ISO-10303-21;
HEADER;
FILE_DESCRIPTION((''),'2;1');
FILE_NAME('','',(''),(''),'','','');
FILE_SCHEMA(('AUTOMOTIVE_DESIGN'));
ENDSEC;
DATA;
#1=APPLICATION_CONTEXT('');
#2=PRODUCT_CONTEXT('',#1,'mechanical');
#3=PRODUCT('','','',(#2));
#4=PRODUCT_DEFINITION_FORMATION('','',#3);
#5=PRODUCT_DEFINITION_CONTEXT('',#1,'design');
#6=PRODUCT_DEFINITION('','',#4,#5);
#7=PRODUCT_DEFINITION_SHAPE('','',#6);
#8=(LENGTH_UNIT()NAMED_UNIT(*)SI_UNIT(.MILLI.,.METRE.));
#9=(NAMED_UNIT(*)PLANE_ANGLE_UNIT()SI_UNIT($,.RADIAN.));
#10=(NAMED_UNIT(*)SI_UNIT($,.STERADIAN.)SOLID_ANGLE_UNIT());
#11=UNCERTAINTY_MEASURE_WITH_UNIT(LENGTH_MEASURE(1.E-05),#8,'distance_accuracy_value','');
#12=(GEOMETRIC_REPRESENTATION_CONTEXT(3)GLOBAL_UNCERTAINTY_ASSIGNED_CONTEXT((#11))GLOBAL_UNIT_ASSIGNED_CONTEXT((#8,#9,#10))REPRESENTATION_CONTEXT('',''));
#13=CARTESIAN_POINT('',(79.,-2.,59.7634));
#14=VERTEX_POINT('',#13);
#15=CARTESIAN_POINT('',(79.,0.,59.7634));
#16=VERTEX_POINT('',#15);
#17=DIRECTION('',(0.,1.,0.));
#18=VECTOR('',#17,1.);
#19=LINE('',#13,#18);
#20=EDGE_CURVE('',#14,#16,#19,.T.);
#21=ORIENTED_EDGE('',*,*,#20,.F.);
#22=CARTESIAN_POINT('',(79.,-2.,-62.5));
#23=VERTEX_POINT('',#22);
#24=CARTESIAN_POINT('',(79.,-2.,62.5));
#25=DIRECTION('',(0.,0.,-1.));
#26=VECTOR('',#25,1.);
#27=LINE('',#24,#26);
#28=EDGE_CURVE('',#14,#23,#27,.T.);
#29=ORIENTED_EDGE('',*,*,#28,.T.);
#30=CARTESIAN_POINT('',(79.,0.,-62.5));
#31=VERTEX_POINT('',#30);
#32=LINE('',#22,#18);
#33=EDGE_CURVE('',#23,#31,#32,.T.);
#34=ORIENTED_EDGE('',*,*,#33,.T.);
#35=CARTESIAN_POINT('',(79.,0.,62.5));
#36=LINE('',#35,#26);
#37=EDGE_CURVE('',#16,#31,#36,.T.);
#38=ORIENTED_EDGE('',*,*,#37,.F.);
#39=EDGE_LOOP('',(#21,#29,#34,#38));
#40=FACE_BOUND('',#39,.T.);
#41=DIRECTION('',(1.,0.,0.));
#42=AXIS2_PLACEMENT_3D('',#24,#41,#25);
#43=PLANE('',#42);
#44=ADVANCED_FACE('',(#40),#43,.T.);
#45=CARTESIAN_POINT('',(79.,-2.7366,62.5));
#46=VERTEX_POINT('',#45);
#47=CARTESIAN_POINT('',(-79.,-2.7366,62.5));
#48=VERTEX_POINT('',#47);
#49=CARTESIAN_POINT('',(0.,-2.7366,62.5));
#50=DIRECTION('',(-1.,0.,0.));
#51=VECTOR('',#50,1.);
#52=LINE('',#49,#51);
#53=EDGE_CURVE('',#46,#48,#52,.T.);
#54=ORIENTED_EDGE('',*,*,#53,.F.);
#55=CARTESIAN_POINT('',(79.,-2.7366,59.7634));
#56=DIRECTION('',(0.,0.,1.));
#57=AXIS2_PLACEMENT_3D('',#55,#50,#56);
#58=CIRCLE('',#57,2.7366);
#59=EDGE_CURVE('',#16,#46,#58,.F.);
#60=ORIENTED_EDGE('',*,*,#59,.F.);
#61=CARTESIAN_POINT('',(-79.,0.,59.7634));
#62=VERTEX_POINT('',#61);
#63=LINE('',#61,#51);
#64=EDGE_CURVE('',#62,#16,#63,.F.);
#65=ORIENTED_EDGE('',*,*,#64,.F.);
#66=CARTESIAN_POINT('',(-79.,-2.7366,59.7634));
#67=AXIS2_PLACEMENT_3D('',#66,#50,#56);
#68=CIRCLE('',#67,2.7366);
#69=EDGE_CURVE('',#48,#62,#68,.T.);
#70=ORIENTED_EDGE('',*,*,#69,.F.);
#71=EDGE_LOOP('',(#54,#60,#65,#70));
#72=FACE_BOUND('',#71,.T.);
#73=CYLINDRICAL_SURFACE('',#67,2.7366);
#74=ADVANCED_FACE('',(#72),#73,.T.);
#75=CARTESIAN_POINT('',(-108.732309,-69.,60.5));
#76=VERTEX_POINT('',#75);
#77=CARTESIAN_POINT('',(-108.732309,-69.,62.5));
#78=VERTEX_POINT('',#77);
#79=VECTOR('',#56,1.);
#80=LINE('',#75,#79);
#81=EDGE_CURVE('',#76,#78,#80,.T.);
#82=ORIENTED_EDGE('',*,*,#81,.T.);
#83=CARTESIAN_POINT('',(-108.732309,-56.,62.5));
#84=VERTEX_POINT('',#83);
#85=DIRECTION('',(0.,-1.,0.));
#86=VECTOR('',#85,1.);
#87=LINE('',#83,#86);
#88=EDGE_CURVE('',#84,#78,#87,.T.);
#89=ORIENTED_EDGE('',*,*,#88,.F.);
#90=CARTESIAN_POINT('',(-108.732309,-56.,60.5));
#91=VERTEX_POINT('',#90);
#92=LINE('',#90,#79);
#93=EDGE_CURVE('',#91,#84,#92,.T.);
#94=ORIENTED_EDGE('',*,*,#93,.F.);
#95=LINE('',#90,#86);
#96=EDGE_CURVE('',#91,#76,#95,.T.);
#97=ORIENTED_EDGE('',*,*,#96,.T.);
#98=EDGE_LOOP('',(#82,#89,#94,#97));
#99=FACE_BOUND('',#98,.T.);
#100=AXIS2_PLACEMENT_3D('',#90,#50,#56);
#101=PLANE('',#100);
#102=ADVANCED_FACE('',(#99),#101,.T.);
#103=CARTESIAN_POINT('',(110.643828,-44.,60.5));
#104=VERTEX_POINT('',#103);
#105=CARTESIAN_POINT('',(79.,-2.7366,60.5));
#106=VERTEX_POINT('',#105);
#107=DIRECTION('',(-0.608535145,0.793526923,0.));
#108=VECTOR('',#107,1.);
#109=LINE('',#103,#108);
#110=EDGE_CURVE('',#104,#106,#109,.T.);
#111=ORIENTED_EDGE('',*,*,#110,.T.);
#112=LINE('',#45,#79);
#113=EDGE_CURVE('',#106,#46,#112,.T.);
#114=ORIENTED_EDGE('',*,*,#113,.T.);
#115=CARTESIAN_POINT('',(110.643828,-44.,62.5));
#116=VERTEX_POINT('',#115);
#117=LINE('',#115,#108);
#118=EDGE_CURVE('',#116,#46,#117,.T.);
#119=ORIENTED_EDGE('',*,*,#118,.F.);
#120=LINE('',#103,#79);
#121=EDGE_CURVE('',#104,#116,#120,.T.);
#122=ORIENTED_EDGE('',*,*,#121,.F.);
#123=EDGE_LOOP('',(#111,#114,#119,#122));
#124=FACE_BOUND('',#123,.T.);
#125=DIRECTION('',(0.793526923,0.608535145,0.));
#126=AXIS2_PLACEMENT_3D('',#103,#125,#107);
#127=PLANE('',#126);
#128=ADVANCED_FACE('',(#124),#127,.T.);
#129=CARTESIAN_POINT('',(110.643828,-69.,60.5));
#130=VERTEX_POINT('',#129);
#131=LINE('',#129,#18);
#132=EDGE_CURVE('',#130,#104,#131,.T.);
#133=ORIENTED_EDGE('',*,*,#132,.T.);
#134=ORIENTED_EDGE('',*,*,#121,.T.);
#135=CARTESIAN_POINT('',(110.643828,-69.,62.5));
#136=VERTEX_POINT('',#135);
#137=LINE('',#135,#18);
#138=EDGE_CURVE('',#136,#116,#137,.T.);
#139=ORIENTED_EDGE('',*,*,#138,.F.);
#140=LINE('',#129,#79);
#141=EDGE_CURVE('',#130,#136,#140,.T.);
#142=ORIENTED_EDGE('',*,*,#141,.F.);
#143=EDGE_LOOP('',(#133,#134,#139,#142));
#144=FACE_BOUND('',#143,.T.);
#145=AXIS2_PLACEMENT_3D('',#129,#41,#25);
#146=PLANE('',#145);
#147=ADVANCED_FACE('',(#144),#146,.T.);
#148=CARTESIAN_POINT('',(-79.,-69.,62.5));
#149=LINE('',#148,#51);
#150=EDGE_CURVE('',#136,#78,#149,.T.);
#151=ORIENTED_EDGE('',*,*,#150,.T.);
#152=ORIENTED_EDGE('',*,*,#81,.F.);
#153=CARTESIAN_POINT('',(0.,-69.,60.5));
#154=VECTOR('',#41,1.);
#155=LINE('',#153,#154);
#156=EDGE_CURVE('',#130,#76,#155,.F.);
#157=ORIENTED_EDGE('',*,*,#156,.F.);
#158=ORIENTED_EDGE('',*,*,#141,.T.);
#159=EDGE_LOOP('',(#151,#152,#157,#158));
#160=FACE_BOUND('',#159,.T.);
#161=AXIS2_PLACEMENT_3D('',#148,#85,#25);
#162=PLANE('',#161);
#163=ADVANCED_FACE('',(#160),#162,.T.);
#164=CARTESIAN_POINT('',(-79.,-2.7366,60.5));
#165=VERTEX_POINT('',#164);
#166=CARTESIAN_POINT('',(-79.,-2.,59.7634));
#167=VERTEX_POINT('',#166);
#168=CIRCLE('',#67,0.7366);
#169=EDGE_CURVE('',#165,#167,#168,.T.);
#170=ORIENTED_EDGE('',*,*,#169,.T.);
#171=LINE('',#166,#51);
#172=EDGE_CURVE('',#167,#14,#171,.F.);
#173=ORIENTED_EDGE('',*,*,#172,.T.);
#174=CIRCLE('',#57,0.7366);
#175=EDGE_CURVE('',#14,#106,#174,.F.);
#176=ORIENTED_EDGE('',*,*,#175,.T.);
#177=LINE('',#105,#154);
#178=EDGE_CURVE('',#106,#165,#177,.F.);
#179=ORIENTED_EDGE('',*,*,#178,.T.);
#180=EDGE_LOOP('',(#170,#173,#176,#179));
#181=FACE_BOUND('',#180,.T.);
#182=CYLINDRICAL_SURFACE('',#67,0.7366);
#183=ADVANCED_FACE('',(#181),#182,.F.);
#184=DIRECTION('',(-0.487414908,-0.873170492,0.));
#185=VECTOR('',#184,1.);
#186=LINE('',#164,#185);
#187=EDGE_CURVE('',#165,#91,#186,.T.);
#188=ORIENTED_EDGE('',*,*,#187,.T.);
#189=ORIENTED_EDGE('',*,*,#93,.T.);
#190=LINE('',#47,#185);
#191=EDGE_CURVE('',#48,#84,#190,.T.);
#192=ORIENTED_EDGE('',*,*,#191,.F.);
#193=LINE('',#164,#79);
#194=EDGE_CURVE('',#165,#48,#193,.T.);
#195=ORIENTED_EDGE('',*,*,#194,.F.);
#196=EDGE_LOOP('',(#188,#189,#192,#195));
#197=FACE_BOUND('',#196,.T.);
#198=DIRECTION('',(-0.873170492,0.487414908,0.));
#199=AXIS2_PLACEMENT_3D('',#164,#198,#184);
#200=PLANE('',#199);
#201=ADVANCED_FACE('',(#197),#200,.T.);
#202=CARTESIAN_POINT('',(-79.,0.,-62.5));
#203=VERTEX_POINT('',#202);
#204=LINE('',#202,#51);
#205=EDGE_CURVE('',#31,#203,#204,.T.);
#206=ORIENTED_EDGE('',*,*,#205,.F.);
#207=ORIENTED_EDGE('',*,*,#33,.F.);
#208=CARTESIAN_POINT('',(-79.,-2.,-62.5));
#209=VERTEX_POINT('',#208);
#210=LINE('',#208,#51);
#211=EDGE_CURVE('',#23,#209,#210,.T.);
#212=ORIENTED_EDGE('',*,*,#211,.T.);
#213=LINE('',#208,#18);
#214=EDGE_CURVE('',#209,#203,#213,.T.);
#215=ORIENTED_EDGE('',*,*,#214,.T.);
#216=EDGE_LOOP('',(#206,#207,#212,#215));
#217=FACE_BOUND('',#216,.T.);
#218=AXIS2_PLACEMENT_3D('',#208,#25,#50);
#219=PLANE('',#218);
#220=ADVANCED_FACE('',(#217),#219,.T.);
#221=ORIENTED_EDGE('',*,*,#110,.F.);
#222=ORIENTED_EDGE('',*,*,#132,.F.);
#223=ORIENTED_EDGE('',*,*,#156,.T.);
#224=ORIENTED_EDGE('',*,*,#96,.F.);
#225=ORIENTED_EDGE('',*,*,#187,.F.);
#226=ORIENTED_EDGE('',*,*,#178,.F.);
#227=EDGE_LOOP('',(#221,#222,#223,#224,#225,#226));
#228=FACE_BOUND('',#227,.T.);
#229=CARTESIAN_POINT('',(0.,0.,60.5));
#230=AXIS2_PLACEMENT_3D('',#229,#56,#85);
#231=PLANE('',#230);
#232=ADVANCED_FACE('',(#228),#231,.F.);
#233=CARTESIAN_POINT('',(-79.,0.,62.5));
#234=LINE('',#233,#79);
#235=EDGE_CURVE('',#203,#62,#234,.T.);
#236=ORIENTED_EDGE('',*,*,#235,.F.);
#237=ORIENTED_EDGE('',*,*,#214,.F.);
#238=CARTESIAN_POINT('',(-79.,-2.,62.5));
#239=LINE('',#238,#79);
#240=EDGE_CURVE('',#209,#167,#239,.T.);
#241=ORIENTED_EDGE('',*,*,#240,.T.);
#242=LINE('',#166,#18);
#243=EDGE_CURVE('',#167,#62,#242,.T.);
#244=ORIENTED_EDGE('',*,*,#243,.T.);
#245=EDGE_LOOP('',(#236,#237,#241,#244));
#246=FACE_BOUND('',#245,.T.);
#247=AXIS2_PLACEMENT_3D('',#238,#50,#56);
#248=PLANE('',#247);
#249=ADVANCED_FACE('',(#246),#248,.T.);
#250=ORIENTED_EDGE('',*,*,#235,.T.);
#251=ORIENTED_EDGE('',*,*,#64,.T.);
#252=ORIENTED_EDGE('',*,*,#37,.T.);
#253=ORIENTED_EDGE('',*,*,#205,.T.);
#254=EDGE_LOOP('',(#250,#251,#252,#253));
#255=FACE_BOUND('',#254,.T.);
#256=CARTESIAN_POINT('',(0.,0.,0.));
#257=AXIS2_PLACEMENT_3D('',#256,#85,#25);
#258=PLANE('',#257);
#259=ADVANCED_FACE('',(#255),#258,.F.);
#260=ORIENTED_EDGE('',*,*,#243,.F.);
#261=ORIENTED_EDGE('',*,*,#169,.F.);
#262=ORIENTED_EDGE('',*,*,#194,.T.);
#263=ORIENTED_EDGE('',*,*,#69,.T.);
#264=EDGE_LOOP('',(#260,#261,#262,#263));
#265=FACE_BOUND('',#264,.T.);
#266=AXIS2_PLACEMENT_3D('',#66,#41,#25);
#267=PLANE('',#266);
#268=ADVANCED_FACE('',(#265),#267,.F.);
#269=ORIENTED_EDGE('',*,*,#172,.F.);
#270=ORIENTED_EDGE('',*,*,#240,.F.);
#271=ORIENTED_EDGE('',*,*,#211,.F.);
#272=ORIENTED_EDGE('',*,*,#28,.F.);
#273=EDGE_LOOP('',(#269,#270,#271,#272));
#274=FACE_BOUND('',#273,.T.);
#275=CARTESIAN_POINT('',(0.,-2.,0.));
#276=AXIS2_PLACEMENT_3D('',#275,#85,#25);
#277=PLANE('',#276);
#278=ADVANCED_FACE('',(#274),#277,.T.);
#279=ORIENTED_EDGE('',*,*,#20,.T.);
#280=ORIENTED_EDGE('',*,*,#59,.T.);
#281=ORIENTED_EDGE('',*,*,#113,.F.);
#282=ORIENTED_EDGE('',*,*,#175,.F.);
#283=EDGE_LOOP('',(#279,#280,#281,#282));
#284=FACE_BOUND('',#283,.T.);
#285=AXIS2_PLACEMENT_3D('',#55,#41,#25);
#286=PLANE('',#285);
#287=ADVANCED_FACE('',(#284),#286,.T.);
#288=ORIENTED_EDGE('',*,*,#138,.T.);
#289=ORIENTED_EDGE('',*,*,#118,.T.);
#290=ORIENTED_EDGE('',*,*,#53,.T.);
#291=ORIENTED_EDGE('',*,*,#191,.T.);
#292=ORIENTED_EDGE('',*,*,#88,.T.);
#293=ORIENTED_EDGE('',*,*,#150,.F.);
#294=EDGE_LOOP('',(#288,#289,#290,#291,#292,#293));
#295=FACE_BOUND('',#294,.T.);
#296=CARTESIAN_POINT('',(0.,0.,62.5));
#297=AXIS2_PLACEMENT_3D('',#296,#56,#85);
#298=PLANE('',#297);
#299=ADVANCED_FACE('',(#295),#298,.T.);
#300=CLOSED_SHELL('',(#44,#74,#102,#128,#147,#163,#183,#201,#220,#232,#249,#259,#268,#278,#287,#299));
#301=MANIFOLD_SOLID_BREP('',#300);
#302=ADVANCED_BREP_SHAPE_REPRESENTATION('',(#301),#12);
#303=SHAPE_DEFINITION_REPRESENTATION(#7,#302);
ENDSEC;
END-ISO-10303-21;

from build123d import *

# Parameters (mm, degrees)
SKETCH_1_W                       = 158
SKETCH_1_H                       = 125
SM_BASE_FLANGE_1_DEPTH           = 2
SM_EDGE_FLANGE_1_STRIP_W         = 9.4732
SM_EDGE_FLANGE_1_STRIP_H         = 2
SM_EDGE_FLANGE_1_STRIP_CUT_DEPTH = 158
SM_EDGE_FLANGE_1_DEPTH           = 158
SM_BASE_FLANGE_1_2_DEPTH         = 2


# Sheet-metal steps are written as plain solids
with BuildPart() as part:
    # Sketch 1 → Sm Base Flange 1 (new body)
    with BuildSketch(Plane(origin=(0, 0, 0), x_dir=(1, 0, 0), z_dir=(0, 1, 0))):
        Rectangle(SKETCH_1_W, SKETCH_1_H)
    extrude(amount=-SM_BASE_FLANGE_1_DEPTH)

    # 边线-法兰1 strip (across the edge) → 边线-法兰1 strip cut (cut)
    with BuildSketch(Plane(origin=(79, -2, 62.5), x_dir=(0, 0, -1), z_dir=(-1, 0, 0))):
        with Locations((-2, -1)):
            Rectangle(SM_EDGE_FLANGE_1_STRIP_W, SM_EDGE_FLANGE_1_STRIP_H)
    extrude(amount=SM_EDGE_FLANGE_1_STRIP_CUT_DEPTH, mode=Mode.SUBTRACT)

    # 边线-法兰1 section (across the edge) → 边线-法兰1 (add)
    with BuildSketch(Plane(origin=(79, -2, 62.5), x_dir=(0, 0, -1), z_dir=(-1, 0, 0))):
        with BuildLine():
            Line((0, 0.7366), (0, 67))
            Line((0, 67), (2, 67))
            Line((2, 67), (2, 0.7366))
            ThreePointArc((2, 0.7366), (2.215745145, 0.215745145), (2.7366, 0))
            Line((2.7366, 0), (2.7366, -2))
            ThreePointArc((2.7366, -2), (0.801531583, -1.198468417), (0, 0.7366))
        make_face()
    extrude(amount=SM_EDGE_FLANGE_1_DEPTH)

    # 草图9 → Sm Base Flange 1 2 (add)
    with BuildSketch(Plane.XY.offset(62.5)):
        Polygon((-79, -2.7366), (-108.732309369, -56), (-108.732309369, -69), (110.643827525, -69), (110.643827525, -44), (79, -2.7366), align=None)
    extrude(amount=-SM_BASE_FLANGE_1_2_DEPTH)


solid = part.part
